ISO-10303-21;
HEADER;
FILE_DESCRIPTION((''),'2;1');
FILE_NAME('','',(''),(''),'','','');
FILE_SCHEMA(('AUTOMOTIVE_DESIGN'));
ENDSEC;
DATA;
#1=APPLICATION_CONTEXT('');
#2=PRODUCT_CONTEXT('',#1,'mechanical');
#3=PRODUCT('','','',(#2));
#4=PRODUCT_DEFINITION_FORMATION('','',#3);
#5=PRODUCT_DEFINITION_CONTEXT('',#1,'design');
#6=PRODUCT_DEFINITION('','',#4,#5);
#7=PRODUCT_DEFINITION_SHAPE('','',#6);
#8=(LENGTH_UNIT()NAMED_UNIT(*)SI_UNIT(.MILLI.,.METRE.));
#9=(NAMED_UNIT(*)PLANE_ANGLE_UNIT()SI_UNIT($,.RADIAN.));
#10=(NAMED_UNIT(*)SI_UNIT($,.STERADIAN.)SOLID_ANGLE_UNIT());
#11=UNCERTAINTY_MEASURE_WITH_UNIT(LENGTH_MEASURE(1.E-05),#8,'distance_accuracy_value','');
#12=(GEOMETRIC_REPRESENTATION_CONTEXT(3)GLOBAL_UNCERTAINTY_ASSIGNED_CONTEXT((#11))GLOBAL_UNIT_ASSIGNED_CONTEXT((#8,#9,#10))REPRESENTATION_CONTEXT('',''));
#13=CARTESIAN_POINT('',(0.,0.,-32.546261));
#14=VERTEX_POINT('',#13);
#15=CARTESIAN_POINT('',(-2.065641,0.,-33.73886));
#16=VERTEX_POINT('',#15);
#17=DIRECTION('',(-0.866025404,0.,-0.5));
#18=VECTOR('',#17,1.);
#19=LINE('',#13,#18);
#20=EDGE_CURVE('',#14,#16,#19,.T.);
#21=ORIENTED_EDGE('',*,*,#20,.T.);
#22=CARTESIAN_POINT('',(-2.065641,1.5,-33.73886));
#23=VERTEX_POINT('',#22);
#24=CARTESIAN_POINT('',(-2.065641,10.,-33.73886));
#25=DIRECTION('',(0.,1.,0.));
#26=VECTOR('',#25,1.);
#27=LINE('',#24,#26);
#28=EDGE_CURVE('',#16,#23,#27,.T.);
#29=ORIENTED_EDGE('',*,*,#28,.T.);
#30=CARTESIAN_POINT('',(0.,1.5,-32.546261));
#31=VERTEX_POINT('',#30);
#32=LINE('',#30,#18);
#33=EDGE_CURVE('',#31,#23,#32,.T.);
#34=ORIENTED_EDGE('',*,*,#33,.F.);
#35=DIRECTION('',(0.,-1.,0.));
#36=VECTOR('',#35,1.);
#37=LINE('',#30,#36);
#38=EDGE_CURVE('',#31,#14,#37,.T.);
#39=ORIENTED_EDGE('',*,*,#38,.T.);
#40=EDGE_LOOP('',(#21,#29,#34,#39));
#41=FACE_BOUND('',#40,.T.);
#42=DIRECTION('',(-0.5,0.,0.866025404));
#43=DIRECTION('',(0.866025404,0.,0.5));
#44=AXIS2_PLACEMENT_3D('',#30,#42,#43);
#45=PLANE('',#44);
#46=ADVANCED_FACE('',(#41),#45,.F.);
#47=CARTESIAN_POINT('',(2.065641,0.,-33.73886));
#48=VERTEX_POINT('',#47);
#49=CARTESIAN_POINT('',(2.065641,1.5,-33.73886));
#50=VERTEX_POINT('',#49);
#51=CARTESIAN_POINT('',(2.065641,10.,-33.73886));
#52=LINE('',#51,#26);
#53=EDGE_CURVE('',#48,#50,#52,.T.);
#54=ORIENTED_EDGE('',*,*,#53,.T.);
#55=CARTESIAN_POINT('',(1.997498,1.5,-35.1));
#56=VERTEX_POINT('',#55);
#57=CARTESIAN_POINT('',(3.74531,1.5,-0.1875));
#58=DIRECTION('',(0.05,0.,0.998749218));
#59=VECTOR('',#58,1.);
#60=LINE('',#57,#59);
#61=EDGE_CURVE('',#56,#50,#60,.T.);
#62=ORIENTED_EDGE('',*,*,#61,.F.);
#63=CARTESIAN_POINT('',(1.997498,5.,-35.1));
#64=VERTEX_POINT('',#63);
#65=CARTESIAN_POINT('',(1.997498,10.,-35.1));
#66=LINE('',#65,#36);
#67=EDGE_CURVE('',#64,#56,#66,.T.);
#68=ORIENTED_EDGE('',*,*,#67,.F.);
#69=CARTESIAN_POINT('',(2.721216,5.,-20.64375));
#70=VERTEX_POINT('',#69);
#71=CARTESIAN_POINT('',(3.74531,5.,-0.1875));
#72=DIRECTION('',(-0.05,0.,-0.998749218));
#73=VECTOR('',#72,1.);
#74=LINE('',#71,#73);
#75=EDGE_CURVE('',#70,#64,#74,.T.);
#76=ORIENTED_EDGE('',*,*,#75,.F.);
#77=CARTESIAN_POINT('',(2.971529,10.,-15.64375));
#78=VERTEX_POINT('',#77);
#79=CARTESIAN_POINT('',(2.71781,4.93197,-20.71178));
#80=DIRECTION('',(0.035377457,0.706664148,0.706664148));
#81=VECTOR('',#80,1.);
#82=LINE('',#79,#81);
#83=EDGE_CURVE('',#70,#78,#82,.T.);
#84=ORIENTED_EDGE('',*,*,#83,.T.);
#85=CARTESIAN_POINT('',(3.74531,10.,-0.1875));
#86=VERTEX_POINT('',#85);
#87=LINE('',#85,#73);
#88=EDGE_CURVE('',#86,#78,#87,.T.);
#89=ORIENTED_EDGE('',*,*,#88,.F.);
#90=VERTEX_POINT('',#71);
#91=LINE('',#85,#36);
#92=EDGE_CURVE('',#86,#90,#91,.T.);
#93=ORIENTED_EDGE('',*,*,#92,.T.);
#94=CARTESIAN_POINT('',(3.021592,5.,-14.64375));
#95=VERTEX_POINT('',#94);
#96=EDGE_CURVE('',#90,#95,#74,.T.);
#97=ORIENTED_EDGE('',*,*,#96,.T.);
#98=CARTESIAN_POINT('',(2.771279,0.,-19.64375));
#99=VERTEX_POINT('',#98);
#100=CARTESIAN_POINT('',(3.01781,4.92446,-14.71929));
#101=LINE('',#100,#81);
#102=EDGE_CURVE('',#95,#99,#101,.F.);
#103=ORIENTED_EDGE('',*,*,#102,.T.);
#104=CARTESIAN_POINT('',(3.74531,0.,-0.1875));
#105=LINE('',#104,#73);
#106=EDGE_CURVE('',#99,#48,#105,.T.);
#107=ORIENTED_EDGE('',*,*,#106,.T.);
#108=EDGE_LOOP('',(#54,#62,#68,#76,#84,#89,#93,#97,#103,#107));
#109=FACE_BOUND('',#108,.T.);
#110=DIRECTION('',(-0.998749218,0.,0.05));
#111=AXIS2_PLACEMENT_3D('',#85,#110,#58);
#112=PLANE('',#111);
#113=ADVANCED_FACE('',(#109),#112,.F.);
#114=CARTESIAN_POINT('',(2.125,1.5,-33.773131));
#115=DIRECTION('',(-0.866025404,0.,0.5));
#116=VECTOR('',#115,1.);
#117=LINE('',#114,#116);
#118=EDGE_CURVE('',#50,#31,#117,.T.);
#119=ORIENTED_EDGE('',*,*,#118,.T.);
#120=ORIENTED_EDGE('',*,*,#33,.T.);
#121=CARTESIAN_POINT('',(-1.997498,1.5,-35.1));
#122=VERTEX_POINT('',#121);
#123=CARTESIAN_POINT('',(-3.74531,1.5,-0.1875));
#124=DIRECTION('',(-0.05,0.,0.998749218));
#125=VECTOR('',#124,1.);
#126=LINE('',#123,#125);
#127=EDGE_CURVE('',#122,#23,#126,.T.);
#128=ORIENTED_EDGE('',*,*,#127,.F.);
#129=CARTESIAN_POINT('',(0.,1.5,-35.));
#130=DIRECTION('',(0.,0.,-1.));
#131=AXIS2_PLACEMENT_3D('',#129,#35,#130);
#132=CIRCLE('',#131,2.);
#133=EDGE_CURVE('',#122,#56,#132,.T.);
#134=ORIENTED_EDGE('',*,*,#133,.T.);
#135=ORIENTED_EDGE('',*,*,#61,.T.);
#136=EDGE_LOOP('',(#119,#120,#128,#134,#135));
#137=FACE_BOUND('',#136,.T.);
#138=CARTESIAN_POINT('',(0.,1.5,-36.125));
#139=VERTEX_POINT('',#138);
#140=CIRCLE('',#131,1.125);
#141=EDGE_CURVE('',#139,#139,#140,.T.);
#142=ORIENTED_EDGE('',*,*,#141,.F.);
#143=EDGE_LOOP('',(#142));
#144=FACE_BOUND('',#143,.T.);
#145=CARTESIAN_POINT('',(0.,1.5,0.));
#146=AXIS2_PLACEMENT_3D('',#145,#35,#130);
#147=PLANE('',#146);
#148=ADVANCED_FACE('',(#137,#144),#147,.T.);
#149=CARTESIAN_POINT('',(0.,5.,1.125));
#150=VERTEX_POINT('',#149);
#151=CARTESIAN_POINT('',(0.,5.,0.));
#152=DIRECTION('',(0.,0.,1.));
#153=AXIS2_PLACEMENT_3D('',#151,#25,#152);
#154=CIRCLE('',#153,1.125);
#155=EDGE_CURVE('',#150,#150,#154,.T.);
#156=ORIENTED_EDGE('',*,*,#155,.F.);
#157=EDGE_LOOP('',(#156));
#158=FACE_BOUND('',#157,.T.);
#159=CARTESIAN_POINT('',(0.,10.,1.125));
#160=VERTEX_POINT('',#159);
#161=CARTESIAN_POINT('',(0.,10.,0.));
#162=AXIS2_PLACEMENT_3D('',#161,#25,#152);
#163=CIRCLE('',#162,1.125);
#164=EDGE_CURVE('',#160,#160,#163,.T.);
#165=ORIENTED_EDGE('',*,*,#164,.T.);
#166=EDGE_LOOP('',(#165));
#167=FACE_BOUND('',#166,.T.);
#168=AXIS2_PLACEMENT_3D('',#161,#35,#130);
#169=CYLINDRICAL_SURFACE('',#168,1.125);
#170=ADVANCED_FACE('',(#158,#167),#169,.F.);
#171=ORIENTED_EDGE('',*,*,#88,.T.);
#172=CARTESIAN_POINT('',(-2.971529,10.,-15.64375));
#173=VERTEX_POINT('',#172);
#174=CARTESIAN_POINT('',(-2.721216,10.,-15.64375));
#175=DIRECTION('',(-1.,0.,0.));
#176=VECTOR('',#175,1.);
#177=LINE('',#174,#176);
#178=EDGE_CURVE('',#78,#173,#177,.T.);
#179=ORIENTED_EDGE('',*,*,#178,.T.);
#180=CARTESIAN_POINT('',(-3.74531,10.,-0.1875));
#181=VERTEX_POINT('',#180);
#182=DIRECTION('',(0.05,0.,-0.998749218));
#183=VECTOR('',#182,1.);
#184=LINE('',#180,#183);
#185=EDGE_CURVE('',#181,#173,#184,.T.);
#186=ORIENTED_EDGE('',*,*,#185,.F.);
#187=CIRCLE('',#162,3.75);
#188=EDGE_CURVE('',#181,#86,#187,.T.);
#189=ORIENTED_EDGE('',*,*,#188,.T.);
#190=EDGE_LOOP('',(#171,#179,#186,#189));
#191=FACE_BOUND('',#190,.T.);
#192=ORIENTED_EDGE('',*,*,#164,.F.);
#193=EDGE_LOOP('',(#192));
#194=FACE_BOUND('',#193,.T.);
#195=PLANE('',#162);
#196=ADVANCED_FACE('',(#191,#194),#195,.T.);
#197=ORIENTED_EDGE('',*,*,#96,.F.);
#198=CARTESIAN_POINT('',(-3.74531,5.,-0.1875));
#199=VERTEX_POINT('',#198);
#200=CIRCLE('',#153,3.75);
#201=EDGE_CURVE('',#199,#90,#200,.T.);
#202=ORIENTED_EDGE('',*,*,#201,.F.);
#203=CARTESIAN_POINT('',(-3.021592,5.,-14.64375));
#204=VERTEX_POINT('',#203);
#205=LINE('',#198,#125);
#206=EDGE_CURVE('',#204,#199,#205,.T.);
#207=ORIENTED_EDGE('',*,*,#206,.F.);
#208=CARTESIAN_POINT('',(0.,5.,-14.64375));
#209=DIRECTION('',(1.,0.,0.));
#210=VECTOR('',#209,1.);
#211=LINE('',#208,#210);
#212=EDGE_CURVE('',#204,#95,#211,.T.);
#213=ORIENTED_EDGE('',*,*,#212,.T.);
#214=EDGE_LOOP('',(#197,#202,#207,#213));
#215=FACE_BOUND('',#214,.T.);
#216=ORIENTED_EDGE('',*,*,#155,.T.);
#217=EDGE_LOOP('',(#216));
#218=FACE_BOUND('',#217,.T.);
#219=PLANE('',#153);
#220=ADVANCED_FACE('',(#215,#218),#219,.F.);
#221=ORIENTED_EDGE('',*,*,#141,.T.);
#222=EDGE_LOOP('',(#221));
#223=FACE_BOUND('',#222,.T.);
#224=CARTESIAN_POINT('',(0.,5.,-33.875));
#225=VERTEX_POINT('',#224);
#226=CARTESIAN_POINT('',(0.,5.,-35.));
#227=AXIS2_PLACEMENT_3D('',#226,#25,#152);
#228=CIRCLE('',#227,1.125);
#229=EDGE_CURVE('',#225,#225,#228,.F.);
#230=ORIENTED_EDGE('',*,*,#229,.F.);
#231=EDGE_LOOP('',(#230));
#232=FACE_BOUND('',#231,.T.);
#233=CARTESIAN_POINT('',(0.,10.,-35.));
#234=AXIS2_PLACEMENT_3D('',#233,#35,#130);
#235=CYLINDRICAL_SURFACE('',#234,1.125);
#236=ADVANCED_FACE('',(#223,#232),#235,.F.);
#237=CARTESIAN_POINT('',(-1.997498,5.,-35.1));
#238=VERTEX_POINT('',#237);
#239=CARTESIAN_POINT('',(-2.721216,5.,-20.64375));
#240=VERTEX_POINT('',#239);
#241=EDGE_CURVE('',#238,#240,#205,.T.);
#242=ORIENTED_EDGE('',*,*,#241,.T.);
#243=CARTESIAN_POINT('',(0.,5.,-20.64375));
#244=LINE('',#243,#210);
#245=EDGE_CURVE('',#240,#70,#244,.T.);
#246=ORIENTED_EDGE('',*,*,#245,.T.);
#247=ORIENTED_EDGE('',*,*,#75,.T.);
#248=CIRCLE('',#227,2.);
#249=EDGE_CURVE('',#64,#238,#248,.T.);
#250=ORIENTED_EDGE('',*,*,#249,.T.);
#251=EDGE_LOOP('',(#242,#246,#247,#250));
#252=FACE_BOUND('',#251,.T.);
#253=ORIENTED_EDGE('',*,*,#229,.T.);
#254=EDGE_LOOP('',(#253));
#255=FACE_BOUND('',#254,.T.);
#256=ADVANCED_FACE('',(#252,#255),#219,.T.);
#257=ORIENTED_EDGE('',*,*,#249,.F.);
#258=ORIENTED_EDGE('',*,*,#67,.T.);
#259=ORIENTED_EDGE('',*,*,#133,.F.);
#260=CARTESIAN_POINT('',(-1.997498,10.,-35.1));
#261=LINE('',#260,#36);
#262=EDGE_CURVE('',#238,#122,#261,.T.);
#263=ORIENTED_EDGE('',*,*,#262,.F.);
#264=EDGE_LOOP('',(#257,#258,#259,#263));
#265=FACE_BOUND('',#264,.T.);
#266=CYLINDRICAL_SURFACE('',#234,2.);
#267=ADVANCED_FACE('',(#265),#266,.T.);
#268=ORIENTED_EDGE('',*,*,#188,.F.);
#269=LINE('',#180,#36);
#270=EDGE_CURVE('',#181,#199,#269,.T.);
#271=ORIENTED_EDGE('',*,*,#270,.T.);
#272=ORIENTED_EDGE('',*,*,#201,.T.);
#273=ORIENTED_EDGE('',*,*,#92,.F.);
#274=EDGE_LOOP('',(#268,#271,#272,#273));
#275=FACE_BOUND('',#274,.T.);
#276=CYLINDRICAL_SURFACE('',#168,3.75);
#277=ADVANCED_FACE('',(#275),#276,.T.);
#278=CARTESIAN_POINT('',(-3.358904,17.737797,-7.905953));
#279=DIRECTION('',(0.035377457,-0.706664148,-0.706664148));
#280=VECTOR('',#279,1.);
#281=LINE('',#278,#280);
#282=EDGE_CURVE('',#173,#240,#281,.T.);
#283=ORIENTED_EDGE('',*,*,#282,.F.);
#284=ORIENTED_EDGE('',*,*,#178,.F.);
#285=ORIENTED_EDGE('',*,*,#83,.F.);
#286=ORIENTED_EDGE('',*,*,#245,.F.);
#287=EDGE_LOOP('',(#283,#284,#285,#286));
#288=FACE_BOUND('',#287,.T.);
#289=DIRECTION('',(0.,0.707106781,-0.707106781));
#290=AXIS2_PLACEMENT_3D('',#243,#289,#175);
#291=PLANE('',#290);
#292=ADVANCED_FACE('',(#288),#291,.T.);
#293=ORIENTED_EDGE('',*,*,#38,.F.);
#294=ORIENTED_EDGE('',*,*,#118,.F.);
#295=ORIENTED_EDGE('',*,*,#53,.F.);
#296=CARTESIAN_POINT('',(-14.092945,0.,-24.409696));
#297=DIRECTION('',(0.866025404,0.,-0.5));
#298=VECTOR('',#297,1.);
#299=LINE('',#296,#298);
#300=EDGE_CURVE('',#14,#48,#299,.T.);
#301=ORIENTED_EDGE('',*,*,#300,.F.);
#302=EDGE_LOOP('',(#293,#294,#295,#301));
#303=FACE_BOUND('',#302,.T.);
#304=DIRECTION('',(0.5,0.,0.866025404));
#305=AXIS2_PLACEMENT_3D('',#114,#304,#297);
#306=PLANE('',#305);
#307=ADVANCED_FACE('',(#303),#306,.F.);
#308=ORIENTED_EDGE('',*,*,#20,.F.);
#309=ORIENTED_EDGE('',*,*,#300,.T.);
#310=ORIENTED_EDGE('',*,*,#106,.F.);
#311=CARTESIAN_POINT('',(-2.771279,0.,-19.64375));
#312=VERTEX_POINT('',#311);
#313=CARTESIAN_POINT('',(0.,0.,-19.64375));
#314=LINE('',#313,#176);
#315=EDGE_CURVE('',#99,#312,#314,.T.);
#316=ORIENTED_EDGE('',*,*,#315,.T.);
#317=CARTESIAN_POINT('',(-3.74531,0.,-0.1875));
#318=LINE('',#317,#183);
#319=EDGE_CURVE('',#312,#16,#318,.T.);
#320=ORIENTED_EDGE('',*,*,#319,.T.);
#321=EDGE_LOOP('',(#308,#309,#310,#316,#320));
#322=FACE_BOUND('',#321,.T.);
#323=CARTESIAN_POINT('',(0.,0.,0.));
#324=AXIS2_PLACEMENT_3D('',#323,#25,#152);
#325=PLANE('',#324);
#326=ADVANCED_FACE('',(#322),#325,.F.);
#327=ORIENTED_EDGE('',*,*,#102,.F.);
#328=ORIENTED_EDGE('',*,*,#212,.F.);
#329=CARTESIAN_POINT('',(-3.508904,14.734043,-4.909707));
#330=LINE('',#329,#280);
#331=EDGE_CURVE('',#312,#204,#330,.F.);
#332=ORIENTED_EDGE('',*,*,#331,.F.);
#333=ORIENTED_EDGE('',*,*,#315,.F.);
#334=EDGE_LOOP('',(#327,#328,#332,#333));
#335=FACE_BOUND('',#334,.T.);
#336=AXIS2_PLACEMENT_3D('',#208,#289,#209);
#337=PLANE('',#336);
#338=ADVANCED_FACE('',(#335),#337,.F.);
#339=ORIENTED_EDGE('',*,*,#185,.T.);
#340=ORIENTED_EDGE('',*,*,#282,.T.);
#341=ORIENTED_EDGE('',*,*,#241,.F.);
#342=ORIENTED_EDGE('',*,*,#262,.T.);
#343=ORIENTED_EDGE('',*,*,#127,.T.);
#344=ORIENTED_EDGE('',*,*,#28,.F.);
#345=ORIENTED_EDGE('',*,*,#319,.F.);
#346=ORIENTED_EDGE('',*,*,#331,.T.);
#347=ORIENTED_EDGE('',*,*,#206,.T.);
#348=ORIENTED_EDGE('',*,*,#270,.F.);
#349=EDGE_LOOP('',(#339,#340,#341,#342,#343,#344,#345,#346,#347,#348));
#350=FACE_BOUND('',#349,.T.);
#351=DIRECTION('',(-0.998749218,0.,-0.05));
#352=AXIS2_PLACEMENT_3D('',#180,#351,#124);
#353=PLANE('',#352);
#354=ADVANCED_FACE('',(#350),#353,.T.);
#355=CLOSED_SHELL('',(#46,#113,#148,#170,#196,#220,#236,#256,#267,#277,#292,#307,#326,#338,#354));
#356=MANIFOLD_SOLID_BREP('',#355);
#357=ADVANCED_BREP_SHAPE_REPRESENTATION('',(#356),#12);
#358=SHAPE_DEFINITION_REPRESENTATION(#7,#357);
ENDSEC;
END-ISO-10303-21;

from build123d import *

# Parameters (mm, degrees)
SKETCH1_R           = 1.125
BOSS_EXTRUDE1_DEPTH = 10
CUT_EXTRUDE1_START  = -5
SKETCH2_R           = 1.125
CUT_EXTRUDE1_DEPTH  = 5
CUT_EXTRUDE3_START  = -10
SKETCH2_4_R         = 1.125
CUT_EXTRUDE3_DEPTH  = 5
CHAMFER1_SIZE       = 5
CUT_EXTRUDE4_DEPTH  = 1.5


with BuildPart() as part:
    # Sketch1 → Boss-Extrude1 (new body)
    with BuildSketch(Plane(origin=(0, 0, 0), x_dir=(1, 0, 0), z_dir=(0, 1, 0))):
        with BuildLine():
            ThreePointArc((-3.745309567, 0.1875), (0, -3.75), (3.745309567, 0.1875))
            Line((3.745309567, 0.1875), (1.997498436, 35.1))
            ThreePointArc((1.997498436, 35.1), (0, 37), (-1.997498436, 35.1))
            Line((-1.997498436, 35.1), (-3.745309567, 0.1875))
        make_face()
        with Locations(Location((0, 0, 0), (0, 0, 270))):
            Circle(SKETCH1_R, mode=Mode.SUBTRACT)
        with Locations(Location((0, 35, 0), (0, 0, 270))):
            Circle(SKETCH1_R, mode=Mode.SUBTRACT)
    extrude(amount=BOSS_EXTRUDE1_DEPTH)

    # Sketch2 → Cut-Extrude1 (cut)
    with BuildSketch(Plane(origin=(0, 10, 0), x_dir=(1, 0, 0), z_dir=(0, 1, 0)).offset(CUT_EXTRUDE1_START)):
        with BuildLine():
            Line((-1.997498436, 35.1), (-2.721216149, 20.64375))
            Line((-2.721216149, 20.64375), (2.721216149, 20.64375))
            Line((2.721216149, 20.64375), (1.997498436, 35.1))
            ThreePointArc((1.997498436, 35.1), (0, 37), (-1.997498436, 35.1))
        make_face()
        with Locations(Location((0, 35, 0), (0, 0, 270))):
            Circle(SKETCH2_R, mode=Mode.SUBTRACT)
    extrude(amount=CUT_EXTRUDE1_DEPTH, mode=Mode.SUBTRACT)

    # Sketch2<4> → Cut-Extrude3 (cut)
    # profile 1 of 2: a face of its own
    with BuildSketch(Plane(origin=(0, 10, 0), x_dir=(1, 0, 0), z_dir=(0, 1, 0)).offset(CUT_EXTRUDE3_START)):
        with BuildLine():
            ThreePointArc((3.745309567, 0.1875), (0, 3.75), (-3.745309567, 0.1875))
            ThreePointArc((-3.745309567, 0.1875), (-0.093779329, -3.748827208), (3.75, 0))
            ThreePointArc((3.75, 0), (3.748827208, 0.093779329), (3.745309567, 0.1875))
        make_face()
        with Locations(Location((0, 0, 0), (0, 0, 270))):
            Circle(SKETCH2_4_R, mode=Mode.SUBTRACT)
    # profile 2 of 2: a face of its own
    with BuildSketch(Plane(origin=(0, 10, 0), x_dir=(1, 0, 0), z_dir=(0, 1, 0)).offset(CUT_EXTRUDE3_START)):
        with BuildLine():
            Line((3.021591853, 14.64375), (-3.021591853, 14.64375))
            Line((-3.021591853, 14.64375), (-3.745309567, 0.1875))
            ThreePointArc((-3.745309567, 0.1875), (0, 3.75), (3.745309567, 0.1875))
            Line((3.745309567, 0.1875), (3.021591853, 14.64375))
        make_face()
    extrude(amount=CUT_EXTRUDE3_DEPTH, mode=Mode.SUBTRACT)

    # Chamfer1
    chamfer1_edges = [part.edges().sort_by_distance(p)[0] for p in [
        (0, 0, -14.64375),
        (0, 10, -20.64375),
    ]]
    chamfer(chamfer1_edges, length=CHAMFER1_SIZE - 0.0001)  # a hair under: the kernel refuses the full size

    # Sketch3 → Cut-Extrude4 (cut)
    with BuildSketch(Plane.XZ):
        Polygon((0, -32.546261356), (-2.125, -33.773130678), (-2.125, -36.226869322), (0, -37.453738644), (2.125, -36.226869322), (2.125, -33.773130678), align=None)
    extrude(amount=-CUT_EXTRUDE4_DEPTH, mode=Mode.SUBTRACT)


solid = part.part
